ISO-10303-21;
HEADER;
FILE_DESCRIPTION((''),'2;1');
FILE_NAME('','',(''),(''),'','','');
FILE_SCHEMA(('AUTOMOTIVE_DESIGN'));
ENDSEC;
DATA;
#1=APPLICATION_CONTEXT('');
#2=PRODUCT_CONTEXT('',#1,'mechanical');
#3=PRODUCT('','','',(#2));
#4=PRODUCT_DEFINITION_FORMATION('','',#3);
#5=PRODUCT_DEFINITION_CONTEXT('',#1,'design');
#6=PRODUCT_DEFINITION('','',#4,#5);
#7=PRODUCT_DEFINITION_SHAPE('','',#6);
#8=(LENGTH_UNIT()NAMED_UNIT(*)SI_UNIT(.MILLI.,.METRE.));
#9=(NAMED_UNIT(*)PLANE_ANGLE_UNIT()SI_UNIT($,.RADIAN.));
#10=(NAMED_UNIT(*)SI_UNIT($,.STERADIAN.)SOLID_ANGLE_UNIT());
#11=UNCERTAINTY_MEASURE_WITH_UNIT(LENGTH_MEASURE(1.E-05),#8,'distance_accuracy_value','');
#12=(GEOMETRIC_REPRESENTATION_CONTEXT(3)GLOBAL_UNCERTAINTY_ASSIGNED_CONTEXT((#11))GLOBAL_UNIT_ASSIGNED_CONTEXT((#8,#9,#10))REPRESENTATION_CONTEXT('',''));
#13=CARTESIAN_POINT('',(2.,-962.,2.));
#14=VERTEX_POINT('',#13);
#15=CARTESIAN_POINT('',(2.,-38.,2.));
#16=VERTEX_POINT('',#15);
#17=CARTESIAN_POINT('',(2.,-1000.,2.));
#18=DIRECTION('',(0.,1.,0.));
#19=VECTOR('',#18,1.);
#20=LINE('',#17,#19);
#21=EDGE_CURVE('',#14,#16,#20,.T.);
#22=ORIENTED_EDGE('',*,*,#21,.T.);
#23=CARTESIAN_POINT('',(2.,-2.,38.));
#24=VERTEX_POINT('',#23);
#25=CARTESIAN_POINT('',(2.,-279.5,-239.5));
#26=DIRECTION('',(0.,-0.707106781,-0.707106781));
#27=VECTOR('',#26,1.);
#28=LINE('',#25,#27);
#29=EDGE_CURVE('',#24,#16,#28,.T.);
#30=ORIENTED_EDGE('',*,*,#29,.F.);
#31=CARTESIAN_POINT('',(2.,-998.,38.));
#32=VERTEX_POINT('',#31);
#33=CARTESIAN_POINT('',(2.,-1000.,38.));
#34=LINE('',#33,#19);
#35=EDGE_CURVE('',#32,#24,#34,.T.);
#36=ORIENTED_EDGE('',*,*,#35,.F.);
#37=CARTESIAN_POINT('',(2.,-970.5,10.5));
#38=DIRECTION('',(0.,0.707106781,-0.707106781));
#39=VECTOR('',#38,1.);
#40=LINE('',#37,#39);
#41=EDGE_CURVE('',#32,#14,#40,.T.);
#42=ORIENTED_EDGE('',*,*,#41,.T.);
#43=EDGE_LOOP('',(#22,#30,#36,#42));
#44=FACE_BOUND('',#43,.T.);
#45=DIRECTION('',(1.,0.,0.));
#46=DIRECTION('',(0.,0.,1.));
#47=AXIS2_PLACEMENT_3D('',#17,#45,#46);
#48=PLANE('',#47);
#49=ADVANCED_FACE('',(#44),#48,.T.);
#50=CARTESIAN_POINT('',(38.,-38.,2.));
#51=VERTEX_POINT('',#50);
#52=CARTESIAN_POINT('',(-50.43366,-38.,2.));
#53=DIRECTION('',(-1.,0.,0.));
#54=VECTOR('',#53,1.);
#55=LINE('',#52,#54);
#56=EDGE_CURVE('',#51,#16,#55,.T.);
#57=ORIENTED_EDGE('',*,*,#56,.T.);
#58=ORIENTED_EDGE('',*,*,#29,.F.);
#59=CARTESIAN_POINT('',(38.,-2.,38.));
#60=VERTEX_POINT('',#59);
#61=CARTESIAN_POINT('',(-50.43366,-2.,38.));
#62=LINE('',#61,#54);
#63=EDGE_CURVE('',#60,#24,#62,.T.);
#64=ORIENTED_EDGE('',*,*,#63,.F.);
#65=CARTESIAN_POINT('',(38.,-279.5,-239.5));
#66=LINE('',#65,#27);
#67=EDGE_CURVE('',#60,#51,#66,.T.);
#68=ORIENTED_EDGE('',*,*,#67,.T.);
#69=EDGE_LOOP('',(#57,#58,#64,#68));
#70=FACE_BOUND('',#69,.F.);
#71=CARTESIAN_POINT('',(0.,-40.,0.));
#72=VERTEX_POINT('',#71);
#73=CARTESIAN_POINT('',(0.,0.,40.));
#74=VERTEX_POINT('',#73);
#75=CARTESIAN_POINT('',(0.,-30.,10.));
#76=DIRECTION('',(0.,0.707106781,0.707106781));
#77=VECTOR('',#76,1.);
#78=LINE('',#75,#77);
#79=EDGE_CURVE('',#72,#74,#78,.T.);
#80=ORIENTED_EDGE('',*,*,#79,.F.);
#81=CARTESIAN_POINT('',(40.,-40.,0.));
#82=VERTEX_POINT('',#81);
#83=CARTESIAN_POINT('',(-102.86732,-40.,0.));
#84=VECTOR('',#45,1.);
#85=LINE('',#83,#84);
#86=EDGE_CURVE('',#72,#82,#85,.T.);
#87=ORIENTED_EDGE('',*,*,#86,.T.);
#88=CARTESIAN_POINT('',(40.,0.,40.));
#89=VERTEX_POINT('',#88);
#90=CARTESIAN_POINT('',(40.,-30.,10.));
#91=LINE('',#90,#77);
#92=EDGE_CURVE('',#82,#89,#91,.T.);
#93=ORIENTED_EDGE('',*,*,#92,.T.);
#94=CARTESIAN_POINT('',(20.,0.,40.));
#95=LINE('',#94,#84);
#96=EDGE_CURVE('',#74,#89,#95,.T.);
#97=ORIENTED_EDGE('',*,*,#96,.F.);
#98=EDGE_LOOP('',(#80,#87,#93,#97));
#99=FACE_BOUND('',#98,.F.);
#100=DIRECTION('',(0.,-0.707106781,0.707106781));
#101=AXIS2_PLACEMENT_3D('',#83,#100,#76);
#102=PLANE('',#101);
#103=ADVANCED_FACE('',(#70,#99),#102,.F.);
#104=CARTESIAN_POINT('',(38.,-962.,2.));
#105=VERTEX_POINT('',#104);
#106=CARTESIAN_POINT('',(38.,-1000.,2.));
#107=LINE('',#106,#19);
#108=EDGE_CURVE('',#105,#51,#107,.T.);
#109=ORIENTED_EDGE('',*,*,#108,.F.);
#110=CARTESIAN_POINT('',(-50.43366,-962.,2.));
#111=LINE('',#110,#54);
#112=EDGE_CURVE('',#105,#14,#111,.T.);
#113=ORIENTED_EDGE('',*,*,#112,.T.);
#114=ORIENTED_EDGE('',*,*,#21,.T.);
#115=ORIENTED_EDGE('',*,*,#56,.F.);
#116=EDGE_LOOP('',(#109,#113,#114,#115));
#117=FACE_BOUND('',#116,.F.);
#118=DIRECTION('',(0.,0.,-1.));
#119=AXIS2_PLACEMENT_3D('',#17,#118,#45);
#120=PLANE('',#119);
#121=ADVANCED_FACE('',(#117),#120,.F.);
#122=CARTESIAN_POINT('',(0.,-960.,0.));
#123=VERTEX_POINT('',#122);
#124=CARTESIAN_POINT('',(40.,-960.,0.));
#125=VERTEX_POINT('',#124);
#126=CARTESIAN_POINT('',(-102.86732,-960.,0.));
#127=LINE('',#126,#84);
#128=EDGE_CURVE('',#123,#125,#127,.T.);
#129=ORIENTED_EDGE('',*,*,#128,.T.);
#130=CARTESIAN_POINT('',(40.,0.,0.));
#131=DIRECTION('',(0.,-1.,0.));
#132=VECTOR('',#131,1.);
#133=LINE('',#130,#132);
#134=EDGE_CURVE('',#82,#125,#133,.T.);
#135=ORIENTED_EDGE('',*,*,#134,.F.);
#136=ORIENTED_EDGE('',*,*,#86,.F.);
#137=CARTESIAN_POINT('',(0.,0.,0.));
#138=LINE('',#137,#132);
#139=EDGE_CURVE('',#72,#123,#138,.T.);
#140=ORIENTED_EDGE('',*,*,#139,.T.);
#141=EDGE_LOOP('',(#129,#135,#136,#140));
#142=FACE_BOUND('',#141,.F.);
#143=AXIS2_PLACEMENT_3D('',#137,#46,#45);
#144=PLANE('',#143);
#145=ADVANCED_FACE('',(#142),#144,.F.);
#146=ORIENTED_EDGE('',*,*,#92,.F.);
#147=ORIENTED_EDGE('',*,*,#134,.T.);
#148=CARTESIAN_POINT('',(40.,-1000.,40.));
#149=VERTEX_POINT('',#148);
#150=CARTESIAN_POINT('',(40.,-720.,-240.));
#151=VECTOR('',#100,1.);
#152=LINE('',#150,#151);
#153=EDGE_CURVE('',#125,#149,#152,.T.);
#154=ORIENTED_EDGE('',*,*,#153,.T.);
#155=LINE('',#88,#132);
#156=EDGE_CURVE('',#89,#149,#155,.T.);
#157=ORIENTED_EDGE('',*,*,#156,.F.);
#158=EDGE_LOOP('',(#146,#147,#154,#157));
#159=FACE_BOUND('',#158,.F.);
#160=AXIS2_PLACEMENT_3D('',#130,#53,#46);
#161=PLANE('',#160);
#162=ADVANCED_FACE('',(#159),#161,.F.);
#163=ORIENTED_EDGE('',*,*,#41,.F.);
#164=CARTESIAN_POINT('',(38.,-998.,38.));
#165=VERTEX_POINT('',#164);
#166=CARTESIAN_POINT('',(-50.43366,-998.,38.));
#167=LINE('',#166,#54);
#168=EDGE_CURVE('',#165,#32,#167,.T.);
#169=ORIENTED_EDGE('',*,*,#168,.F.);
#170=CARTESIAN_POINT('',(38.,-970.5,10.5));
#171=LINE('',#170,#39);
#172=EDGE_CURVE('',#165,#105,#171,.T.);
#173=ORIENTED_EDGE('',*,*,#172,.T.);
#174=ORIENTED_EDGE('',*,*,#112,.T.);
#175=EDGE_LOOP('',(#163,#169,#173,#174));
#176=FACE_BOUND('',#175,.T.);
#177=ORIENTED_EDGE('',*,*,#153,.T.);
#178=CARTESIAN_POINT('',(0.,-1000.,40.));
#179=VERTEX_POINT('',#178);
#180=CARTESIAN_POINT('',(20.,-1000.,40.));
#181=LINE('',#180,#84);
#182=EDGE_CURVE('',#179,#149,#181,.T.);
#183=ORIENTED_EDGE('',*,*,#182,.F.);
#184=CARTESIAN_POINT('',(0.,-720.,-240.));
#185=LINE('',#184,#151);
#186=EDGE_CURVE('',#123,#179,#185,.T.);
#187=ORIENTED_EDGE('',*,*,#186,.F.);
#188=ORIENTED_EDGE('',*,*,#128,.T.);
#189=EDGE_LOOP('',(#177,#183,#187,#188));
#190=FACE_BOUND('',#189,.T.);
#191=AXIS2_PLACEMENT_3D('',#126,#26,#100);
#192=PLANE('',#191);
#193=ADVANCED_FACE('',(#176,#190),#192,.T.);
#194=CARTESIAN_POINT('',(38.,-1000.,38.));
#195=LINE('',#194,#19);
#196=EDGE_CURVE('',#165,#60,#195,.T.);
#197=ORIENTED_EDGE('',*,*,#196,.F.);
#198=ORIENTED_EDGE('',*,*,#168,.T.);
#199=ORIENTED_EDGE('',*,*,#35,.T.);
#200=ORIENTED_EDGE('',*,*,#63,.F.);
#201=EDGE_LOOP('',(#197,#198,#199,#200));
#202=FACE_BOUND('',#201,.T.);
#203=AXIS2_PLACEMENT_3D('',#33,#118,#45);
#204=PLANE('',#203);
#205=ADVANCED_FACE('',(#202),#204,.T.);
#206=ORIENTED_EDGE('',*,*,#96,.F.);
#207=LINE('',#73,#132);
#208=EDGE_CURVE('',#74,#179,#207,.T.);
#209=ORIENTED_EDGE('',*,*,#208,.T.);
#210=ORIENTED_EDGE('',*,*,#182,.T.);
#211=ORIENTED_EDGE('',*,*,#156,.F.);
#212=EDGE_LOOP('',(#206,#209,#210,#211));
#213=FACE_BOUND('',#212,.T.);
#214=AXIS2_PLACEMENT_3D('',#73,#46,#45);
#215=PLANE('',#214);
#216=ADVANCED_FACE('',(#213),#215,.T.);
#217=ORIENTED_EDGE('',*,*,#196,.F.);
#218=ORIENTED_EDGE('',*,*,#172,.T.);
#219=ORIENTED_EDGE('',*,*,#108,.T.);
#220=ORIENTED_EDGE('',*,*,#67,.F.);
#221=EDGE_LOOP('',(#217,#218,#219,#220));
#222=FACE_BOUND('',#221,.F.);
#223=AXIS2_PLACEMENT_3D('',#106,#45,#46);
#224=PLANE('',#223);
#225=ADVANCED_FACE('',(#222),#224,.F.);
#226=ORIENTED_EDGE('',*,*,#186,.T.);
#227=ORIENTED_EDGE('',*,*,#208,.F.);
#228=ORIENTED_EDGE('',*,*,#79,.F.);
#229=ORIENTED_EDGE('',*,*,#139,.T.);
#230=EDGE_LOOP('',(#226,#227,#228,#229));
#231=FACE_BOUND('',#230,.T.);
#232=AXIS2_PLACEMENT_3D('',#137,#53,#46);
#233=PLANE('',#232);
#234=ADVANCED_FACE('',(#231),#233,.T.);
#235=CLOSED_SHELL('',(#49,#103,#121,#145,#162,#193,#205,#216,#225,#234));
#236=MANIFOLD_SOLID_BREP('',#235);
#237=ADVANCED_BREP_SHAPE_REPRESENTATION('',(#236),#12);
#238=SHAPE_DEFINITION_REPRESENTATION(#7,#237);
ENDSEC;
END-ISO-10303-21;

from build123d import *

# Parameters (mm, degrees)
F0_W        = 40
F0_H        = 40
F1_DEPTH    = 1000
F2_W        = 36
F2_H        = 36
F3_DEPTH    = 1000.001
F4_T1_DEPTH = 245.7346390373


# Not quite as in the source:
# - a fillet or chamfer that OpenCascade refuses, or shapes differently, is made with other operations: its cross-section is extruded or revolved along the edge and cut away or added


with BuildPart() as f1:
    # F0 (on Front) → F1 (new body)
    with BuildSketch(Plane.XZ):
        with Locations((20, 20)):
            Rectangle(F0_W, F0_H)
    extrude(amount=F1_DEPTH)

    # F2 (on face) → F3 (cut, through all)
    with BuildSketch(Plane.XZ.offset(1000)):
        with Locations((20, 20)):
            Rectangle(F2_W, F2_H)
    extrude(amount=-F3_DEPTH, mode=Mode.SUBTRACT)

    # F4: chamfer of 40 on 2 edges, made by hand

    # F4_s2 → F4_t1 (cut)
    with BuildSketch(Plane.YZ.offset(-102.8673195186)):
        Polygon((-960, 0), (-1000, 40), (-1000, 0), align=None)
        Polygon((-40, 0), (0, 40), (0, 0), align=None)
    extrude(amount=F4_T1_DEPTH, mode=Mode.SUBTRACT)


solid = f1.part
